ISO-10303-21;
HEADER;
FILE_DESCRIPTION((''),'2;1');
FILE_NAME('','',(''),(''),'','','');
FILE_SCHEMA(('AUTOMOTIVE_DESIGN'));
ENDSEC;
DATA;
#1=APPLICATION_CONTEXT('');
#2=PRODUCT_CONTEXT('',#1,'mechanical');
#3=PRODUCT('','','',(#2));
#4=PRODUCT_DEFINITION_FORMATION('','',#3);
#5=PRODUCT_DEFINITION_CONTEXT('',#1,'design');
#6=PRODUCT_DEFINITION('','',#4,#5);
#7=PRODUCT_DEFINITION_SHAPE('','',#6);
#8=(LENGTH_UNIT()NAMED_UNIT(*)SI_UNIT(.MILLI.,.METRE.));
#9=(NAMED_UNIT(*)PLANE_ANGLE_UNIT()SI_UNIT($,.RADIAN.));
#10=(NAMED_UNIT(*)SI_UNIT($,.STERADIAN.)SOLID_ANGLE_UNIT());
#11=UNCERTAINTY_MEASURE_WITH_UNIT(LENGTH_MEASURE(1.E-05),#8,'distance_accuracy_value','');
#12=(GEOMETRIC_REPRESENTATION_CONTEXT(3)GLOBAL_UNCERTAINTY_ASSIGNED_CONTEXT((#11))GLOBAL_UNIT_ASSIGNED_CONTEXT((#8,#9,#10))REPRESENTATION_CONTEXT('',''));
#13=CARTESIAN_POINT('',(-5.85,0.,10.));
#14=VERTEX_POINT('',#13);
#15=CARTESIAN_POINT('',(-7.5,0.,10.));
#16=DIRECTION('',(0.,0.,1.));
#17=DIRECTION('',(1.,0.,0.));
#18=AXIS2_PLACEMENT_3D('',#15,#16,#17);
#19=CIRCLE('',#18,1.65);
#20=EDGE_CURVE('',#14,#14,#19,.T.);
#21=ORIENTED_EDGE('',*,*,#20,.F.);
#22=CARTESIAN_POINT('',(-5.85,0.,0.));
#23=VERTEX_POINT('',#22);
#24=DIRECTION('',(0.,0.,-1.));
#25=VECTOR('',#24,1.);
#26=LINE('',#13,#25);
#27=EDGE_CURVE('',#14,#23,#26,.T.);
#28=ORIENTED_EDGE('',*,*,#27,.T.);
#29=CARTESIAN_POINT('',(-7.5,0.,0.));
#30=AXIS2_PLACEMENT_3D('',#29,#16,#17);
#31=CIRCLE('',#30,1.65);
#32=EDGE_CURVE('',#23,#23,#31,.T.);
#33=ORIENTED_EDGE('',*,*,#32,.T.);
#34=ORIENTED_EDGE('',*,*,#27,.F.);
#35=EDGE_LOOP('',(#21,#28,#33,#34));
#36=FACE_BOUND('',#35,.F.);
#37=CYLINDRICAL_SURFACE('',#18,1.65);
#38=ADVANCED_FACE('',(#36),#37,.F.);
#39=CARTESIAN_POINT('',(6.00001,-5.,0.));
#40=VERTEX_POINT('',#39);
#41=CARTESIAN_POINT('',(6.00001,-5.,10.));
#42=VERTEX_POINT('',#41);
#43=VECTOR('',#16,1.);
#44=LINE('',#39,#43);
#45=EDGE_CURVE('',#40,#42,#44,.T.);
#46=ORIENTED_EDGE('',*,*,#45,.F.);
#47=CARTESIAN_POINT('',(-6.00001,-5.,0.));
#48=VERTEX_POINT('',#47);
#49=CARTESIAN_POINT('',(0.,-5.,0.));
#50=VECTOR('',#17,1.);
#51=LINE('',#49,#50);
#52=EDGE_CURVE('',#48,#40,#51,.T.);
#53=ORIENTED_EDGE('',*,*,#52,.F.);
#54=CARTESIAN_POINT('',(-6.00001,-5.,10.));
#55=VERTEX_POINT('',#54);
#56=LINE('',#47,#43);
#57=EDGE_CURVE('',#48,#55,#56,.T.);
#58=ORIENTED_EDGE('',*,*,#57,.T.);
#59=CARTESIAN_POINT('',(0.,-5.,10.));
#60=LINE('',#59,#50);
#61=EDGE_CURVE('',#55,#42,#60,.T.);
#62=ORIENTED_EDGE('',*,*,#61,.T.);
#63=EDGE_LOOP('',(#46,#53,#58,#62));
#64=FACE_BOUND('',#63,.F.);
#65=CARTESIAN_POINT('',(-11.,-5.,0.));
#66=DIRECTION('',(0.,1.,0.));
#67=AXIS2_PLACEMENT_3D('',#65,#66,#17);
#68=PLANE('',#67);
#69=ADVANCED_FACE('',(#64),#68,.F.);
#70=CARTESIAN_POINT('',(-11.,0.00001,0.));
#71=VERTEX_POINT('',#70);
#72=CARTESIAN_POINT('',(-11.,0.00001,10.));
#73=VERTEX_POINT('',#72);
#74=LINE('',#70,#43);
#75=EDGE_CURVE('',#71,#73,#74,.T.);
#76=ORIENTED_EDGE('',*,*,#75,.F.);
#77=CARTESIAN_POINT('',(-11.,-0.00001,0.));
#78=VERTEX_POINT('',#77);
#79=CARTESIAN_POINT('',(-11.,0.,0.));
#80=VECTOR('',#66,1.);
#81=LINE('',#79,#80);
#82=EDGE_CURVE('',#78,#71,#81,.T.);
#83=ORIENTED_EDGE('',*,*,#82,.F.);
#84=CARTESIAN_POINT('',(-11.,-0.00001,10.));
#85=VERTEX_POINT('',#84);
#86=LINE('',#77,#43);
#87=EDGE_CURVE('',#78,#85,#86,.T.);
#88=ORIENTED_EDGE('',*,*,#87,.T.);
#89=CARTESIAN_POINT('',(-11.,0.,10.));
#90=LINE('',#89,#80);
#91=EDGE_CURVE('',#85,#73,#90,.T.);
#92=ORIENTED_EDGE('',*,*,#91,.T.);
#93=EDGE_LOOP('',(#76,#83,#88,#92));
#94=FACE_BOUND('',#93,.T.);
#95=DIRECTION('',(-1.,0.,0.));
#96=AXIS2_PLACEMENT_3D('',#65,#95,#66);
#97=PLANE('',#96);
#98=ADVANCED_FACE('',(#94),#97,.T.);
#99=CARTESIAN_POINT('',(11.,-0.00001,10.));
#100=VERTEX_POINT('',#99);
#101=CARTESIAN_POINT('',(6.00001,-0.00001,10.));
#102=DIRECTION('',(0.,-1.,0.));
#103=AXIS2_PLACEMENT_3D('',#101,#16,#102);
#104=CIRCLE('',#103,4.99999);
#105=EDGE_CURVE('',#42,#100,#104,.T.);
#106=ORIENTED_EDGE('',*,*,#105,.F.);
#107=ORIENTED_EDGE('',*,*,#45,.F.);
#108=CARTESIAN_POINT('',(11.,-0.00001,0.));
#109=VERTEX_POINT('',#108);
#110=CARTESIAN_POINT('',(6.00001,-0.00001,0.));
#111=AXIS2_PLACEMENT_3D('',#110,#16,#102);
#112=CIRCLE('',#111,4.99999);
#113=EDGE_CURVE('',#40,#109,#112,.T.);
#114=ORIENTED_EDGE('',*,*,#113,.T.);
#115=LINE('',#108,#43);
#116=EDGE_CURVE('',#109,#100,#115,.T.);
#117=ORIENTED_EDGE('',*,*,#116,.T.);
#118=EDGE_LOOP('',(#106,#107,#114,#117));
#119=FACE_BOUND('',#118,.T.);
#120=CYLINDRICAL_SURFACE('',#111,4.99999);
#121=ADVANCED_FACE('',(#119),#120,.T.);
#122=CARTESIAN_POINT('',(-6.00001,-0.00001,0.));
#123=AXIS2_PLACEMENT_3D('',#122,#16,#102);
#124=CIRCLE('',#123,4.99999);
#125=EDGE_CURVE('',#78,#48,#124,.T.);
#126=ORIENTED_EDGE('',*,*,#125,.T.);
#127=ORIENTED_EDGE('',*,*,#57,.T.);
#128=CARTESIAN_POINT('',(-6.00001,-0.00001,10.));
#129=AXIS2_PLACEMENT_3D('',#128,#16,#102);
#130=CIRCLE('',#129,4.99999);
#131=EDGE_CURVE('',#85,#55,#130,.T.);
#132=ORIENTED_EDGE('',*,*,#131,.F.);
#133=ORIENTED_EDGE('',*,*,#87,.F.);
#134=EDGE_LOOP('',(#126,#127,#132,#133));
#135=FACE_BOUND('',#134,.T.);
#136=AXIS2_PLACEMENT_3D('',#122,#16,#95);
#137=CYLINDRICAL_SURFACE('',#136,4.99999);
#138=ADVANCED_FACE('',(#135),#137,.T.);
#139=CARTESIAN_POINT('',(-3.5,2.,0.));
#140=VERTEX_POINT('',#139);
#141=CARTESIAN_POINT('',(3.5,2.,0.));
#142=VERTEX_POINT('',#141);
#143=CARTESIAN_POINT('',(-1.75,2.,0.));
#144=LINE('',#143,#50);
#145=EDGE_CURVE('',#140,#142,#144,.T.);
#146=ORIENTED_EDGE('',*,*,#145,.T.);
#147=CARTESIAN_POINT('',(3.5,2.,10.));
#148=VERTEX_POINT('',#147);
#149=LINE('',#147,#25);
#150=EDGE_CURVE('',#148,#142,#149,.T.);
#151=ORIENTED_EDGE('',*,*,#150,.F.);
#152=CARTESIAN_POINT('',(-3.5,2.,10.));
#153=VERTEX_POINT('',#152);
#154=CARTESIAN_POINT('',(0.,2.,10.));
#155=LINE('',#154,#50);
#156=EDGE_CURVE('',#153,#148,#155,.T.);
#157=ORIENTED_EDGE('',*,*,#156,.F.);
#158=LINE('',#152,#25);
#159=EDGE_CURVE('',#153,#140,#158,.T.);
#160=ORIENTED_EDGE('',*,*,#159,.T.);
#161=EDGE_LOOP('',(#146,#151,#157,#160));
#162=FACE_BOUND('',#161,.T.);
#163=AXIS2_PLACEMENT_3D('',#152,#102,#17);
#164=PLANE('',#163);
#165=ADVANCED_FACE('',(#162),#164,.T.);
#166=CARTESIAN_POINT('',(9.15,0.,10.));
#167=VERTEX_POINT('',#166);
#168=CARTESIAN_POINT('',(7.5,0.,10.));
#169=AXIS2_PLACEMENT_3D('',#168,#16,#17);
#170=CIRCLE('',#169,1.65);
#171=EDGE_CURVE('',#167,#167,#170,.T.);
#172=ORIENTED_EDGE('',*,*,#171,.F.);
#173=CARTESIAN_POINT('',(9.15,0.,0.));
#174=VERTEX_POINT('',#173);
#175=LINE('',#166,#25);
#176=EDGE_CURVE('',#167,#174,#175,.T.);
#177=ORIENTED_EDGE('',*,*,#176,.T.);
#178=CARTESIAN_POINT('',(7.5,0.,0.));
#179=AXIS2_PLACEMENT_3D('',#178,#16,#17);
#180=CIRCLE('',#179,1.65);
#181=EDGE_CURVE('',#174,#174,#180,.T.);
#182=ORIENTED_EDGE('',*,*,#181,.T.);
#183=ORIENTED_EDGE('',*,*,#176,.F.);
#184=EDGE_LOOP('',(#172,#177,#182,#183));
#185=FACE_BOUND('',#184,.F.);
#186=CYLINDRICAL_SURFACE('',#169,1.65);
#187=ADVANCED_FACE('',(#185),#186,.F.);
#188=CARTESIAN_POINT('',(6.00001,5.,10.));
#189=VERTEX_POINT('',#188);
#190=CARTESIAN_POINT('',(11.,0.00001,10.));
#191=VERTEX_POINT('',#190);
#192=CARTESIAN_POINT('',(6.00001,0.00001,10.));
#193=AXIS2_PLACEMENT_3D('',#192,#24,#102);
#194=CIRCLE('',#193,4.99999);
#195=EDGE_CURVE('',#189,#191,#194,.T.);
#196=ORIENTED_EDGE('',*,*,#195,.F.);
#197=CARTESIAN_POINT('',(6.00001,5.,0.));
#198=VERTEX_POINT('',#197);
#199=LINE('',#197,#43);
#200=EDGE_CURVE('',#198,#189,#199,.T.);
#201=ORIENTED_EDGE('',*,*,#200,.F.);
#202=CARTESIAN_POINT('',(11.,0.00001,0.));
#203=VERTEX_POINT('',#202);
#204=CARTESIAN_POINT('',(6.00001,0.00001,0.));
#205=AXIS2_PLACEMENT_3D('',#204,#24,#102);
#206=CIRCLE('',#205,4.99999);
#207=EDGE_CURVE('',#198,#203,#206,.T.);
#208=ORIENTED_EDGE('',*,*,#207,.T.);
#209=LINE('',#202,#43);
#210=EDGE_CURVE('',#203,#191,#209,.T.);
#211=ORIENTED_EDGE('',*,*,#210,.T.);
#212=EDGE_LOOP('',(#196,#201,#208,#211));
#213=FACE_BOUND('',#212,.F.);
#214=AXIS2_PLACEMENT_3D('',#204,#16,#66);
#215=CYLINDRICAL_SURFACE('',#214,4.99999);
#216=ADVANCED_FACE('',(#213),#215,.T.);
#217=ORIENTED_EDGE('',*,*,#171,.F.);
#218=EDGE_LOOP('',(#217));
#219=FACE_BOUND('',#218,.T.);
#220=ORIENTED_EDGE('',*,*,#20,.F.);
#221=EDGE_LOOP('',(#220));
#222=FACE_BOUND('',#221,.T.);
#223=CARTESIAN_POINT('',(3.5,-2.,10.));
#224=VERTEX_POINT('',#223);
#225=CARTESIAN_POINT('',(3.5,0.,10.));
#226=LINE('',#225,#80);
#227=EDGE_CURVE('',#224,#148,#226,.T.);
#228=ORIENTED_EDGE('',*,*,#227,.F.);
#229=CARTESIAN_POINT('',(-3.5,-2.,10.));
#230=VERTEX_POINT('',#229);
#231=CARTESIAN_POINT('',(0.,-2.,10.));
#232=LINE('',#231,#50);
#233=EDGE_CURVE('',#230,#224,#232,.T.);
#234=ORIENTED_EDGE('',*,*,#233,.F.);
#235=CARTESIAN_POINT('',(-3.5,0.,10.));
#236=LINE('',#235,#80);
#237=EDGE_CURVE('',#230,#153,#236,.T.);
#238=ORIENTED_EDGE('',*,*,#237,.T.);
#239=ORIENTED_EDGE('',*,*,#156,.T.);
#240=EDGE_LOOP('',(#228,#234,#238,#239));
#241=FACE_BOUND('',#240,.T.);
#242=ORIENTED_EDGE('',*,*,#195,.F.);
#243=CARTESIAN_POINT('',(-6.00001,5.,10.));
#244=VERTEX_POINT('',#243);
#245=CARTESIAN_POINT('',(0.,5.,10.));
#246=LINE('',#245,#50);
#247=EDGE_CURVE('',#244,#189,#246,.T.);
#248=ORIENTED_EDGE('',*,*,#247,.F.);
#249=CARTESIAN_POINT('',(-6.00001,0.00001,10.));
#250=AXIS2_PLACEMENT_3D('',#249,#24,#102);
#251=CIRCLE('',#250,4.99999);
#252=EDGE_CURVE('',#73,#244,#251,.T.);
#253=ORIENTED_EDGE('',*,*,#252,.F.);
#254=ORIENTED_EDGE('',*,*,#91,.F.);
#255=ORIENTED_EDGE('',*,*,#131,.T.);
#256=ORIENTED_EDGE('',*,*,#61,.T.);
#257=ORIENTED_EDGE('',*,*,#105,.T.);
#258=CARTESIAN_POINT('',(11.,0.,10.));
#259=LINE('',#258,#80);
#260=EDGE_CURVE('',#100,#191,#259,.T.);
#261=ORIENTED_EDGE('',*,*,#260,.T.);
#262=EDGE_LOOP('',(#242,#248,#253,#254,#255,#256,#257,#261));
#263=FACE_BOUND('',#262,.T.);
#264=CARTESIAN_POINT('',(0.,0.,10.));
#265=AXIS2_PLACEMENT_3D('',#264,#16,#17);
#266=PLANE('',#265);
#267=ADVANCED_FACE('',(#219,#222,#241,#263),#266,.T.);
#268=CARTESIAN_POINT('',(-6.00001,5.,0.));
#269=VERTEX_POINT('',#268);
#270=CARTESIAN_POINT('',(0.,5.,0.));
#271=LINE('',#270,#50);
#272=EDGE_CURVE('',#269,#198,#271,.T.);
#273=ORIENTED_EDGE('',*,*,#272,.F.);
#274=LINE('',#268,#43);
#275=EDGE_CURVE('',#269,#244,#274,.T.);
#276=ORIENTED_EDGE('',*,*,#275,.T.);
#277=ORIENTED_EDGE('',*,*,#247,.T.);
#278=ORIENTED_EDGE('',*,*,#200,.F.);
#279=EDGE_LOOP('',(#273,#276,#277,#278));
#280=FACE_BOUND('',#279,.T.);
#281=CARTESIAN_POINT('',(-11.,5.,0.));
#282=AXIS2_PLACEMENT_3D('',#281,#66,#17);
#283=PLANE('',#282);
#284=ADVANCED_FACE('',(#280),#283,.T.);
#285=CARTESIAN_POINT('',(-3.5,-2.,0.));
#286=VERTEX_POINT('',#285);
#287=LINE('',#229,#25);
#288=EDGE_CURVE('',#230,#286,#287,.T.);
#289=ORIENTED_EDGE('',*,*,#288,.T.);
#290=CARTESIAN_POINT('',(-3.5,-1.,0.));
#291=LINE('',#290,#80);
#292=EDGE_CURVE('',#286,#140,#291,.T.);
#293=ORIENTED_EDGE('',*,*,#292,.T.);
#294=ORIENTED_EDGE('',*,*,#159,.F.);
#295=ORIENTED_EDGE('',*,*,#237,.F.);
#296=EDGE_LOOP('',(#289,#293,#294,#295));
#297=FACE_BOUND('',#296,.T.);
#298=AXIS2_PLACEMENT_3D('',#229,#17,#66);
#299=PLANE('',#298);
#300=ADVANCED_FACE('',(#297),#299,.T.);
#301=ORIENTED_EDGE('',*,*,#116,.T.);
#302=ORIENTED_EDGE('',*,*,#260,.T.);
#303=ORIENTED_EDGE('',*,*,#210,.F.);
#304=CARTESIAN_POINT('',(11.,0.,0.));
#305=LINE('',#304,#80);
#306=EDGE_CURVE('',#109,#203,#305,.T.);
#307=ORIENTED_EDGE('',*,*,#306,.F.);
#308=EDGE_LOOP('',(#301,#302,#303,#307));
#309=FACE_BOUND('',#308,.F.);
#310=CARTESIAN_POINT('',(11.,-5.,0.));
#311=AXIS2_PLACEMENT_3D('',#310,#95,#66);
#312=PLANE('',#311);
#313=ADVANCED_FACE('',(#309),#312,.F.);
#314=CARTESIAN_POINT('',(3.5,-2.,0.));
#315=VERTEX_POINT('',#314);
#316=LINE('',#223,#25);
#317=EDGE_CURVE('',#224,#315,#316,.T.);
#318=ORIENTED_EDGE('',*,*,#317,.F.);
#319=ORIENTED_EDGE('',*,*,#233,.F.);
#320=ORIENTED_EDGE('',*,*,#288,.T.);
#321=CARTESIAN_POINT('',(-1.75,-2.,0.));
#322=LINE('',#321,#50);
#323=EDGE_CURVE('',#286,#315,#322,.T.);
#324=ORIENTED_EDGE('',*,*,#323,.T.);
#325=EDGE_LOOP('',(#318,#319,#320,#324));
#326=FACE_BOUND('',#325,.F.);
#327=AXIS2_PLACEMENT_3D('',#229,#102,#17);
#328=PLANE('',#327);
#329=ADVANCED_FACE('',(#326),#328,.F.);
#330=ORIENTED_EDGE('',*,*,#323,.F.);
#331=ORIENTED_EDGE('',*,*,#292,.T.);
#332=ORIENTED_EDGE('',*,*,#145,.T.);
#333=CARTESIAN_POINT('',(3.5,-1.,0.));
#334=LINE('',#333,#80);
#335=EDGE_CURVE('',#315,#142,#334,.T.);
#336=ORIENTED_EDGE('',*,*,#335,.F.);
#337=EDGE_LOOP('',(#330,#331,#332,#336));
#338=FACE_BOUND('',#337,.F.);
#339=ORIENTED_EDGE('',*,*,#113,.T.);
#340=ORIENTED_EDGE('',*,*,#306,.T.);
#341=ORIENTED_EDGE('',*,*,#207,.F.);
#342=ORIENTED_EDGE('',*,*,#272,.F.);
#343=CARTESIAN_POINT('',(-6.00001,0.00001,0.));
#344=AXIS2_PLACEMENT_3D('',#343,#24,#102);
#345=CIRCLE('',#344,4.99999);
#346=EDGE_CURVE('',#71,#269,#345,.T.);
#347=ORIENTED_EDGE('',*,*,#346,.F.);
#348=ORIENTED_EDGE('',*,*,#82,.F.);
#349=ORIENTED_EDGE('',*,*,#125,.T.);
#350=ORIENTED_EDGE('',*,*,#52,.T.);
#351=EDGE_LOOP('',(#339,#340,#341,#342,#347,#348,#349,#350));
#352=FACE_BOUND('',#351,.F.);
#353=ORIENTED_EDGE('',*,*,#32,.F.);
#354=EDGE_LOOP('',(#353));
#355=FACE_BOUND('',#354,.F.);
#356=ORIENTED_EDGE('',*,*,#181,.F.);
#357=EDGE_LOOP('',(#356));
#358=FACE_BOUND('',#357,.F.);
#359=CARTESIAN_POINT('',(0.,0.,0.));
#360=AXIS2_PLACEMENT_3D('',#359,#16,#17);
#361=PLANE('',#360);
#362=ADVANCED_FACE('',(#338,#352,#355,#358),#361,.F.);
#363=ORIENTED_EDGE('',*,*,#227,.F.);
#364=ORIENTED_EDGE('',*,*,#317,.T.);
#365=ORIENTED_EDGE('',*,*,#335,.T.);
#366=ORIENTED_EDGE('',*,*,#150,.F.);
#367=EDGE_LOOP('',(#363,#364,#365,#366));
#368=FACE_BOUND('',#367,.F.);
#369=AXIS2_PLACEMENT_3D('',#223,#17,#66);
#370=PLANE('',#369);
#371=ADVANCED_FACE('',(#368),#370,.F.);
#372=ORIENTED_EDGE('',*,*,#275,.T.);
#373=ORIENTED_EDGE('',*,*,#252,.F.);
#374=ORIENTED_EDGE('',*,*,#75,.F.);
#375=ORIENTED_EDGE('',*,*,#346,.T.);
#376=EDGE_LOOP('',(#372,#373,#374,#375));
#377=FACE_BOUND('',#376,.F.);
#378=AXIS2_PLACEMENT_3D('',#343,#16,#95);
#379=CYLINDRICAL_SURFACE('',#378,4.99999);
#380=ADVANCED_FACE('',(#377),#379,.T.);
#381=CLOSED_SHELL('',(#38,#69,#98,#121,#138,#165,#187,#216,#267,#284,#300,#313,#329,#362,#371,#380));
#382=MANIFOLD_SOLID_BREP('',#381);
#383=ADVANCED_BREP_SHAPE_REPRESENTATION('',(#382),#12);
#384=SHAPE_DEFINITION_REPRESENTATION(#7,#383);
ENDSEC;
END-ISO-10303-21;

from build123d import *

# Parameters (mm, degrees)
F0_W     = 22
F0_H     = 10
F1_DEPTH = 10
F2_R     = 1.65
F2_W     = 7
F2_H     = 4
F3_DEPTH = 10.001
F4_R     = 4.99999


# Not quite as in the source:
# - a fillet or chamfer is up to 0.001 mm smaller than in the source, because OpenCascade refuses the exact size


with BuildPart() as f1:
    # F0 (on Top) → F1 (new body)
    with BuildSketch(Plane.XY):
        Rectangle(F0_W, F0_H)
    extrude(amount=F1_DEPTH)

    # F2 (on face) → F3 (cut, through all)
    with BuildSketch(Plane.XY.offset(10)):
        with Locations((-7.5, 0)):
            Circle(F2_R)
        with Locations((7.5, 0)):
            Circle(F2_R)
        Rectangle(F2_W, F2_H)
    extrude(amount=-F3_DEPTH, mode=Mode.SUBTRACT)

    # F4 (radius 5 in the source; OpenCascade refuses exactly that, so slightly less here)
    f4_edges = [f1.edges().sort_by_distance(p)[0] for p in [
        (-11, 5, 5),
        (-11, -5, 5),
        (11, 5, 5),
        (11, -5, 5),
    ]]
    fillet(f4_edges, radius=F4_R)


solid = f1.part
